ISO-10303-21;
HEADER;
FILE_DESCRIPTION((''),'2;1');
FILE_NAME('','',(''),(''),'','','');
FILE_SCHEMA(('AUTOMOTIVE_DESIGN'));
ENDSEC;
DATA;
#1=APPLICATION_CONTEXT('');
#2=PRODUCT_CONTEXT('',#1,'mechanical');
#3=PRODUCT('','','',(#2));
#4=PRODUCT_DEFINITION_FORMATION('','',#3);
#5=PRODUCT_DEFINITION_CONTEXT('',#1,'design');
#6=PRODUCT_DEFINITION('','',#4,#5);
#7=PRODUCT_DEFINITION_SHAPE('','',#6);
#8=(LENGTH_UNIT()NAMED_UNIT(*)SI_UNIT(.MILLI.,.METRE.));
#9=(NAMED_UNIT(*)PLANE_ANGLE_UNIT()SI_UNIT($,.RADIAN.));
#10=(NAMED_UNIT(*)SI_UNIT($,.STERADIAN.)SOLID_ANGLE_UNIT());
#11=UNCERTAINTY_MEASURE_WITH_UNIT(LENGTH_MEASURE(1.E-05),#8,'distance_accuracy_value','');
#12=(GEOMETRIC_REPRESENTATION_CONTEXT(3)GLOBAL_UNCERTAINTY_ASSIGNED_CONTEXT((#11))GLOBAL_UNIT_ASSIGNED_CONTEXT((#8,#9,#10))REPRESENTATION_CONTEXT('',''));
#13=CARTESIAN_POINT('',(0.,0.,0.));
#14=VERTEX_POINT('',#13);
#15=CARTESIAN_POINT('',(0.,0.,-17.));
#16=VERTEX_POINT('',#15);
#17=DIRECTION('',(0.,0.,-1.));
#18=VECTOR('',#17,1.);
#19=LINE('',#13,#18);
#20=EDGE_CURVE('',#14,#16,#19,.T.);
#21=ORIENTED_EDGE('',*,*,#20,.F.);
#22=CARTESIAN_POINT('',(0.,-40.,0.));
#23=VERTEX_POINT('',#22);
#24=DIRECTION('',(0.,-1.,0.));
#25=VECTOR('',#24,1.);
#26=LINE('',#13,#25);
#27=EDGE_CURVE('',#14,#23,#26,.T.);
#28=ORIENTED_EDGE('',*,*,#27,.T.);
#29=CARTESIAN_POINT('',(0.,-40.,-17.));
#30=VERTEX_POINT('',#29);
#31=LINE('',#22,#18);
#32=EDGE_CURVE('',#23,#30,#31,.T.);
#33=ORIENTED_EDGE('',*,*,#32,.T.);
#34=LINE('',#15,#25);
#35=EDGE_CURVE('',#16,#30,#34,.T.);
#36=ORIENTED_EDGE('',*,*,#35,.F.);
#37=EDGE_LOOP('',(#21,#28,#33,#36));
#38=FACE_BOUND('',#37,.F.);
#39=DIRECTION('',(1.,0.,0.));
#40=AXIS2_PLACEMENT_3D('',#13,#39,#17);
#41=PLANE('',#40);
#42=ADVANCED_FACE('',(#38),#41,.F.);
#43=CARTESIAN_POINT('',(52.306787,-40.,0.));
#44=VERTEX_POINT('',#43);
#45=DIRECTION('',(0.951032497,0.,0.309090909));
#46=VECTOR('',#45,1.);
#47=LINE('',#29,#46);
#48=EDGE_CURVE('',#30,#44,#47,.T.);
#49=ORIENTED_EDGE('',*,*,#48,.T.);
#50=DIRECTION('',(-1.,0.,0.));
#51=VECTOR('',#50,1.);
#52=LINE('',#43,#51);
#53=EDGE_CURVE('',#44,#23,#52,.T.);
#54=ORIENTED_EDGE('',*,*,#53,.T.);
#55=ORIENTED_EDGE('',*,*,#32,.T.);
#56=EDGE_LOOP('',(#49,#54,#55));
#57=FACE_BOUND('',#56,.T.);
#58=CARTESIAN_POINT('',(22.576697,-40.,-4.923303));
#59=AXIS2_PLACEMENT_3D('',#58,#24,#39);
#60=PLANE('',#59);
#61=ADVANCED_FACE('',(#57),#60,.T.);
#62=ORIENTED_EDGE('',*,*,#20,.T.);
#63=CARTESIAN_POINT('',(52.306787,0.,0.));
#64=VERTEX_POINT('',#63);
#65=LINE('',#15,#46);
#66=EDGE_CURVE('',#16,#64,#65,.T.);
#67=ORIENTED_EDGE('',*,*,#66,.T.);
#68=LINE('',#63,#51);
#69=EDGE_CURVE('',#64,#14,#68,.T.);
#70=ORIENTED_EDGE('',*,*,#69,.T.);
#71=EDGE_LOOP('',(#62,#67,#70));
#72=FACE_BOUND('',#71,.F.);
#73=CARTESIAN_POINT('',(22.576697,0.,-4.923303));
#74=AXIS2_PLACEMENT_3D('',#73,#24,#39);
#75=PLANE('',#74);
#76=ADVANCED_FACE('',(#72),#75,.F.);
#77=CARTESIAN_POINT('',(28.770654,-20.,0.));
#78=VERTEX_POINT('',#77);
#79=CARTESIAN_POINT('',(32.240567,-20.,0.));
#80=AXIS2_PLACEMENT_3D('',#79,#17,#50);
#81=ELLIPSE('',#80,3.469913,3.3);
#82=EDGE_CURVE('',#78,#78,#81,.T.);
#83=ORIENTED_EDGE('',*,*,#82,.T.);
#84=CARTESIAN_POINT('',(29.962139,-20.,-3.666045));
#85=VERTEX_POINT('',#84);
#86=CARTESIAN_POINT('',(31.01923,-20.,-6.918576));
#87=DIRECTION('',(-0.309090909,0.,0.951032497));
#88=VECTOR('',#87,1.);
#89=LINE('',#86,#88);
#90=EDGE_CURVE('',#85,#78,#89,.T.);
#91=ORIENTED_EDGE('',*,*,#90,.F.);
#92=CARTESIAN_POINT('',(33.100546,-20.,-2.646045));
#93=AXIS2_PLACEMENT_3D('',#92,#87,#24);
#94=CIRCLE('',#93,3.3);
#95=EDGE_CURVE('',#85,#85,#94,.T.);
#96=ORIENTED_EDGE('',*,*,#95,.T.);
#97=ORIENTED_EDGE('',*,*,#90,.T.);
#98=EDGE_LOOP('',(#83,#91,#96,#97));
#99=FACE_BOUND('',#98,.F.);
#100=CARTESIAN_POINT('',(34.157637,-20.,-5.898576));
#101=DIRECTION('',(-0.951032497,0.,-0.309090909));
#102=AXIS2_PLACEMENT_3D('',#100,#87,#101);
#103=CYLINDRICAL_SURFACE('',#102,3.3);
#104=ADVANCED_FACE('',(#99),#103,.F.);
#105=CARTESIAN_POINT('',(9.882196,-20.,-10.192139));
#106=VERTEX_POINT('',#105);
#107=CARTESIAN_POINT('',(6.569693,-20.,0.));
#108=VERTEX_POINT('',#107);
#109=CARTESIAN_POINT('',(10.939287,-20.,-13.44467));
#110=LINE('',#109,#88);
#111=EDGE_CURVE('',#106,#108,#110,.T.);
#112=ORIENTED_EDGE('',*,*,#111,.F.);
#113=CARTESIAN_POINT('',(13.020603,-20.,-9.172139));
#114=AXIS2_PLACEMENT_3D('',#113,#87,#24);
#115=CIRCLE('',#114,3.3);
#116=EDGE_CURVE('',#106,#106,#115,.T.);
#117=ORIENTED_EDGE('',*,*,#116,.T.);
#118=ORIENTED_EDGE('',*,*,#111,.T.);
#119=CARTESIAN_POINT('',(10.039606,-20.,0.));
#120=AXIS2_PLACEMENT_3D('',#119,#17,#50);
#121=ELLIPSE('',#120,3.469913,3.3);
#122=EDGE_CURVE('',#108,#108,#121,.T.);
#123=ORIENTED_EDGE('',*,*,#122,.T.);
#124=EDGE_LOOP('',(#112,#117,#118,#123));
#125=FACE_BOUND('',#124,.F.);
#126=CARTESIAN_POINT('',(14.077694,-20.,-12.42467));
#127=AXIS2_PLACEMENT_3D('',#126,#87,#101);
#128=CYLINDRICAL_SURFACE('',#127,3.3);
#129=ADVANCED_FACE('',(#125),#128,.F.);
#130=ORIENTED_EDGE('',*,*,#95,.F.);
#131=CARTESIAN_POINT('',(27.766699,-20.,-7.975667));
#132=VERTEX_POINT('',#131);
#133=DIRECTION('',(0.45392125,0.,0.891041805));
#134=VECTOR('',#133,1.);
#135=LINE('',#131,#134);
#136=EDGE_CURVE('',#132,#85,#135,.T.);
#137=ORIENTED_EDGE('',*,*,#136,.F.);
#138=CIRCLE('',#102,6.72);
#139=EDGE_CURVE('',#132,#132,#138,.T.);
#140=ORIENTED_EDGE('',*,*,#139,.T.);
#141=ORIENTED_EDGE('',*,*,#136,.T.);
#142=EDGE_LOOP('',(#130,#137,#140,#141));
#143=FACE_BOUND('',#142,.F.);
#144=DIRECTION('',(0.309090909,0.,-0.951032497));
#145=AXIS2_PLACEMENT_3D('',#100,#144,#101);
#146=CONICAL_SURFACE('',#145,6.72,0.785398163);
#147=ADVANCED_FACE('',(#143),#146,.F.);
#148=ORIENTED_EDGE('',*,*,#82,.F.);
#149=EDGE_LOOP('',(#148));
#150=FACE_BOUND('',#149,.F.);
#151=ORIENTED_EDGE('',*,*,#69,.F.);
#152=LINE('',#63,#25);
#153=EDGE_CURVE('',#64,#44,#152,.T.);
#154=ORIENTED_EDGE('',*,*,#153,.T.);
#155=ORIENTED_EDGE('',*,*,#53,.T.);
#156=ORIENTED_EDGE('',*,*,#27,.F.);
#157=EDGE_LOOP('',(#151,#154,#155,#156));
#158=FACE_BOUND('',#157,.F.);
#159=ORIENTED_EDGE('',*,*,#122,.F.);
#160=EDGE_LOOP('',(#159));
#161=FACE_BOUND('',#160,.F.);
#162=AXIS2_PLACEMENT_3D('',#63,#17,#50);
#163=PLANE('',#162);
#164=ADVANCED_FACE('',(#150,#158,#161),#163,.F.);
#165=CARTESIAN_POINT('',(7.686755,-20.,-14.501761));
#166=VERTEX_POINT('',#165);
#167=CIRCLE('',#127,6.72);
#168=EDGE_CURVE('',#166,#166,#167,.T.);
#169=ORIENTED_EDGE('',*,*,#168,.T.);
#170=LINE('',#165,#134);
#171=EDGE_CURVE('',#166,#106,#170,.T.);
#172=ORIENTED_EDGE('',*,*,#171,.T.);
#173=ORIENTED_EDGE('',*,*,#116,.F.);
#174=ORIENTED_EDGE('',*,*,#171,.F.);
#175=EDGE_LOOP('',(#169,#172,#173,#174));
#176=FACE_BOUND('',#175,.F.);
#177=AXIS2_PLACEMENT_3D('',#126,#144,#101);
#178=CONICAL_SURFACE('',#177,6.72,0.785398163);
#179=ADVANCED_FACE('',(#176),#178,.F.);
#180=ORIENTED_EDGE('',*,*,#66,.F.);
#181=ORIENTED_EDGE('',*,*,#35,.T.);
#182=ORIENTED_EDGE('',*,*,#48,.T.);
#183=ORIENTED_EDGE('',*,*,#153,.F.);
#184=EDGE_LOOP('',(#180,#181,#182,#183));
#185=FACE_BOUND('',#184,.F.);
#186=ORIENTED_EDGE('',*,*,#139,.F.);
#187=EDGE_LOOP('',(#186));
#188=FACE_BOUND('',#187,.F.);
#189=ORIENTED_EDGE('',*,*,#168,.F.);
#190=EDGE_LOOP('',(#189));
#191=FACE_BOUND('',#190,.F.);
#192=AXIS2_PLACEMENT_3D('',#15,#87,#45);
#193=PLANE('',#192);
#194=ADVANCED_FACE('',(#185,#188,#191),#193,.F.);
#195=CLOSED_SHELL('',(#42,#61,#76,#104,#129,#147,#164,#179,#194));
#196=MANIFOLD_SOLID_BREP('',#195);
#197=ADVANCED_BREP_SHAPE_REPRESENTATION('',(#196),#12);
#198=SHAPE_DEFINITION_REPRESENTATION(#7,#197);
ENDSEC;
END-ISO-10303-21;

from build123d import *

# Parameters (mm, degrees)
F1_DEPTH       = 40
F3_D           = 6.6
F3_CSINK_D     = 13.44
F3_CSINK_ANGLE = 90


# Not quite as in the source:
# - a feature names something its author has since deleted; it is built from what else it names


with BuildPart() as f1:
    # F0 (on Front) → F1 (new body)
    with BuildSketch(Plane.XZ):
        Polygon((52.3067873225, 0), (0, 0), (0, -17), align=None)
    extrude(amount=F1_DEPTH)

    # F3 (through all)
    with Locations(Plane(origin=(4.997243483, 0, -15.3758677686), x_dir=(0.9510324968, 0, 0.3090909091), z_dir=(0.3090909091, 0, -0.9510324968))):
        with Locations((9.5479916781, 20), (30.6618269533, 20)):
            CounterSinkHole(F3_D / 2, F3_CSINK_D / 2, counter_sink_angle=F3_CSINK_ANGLE)


solid = f1.part
